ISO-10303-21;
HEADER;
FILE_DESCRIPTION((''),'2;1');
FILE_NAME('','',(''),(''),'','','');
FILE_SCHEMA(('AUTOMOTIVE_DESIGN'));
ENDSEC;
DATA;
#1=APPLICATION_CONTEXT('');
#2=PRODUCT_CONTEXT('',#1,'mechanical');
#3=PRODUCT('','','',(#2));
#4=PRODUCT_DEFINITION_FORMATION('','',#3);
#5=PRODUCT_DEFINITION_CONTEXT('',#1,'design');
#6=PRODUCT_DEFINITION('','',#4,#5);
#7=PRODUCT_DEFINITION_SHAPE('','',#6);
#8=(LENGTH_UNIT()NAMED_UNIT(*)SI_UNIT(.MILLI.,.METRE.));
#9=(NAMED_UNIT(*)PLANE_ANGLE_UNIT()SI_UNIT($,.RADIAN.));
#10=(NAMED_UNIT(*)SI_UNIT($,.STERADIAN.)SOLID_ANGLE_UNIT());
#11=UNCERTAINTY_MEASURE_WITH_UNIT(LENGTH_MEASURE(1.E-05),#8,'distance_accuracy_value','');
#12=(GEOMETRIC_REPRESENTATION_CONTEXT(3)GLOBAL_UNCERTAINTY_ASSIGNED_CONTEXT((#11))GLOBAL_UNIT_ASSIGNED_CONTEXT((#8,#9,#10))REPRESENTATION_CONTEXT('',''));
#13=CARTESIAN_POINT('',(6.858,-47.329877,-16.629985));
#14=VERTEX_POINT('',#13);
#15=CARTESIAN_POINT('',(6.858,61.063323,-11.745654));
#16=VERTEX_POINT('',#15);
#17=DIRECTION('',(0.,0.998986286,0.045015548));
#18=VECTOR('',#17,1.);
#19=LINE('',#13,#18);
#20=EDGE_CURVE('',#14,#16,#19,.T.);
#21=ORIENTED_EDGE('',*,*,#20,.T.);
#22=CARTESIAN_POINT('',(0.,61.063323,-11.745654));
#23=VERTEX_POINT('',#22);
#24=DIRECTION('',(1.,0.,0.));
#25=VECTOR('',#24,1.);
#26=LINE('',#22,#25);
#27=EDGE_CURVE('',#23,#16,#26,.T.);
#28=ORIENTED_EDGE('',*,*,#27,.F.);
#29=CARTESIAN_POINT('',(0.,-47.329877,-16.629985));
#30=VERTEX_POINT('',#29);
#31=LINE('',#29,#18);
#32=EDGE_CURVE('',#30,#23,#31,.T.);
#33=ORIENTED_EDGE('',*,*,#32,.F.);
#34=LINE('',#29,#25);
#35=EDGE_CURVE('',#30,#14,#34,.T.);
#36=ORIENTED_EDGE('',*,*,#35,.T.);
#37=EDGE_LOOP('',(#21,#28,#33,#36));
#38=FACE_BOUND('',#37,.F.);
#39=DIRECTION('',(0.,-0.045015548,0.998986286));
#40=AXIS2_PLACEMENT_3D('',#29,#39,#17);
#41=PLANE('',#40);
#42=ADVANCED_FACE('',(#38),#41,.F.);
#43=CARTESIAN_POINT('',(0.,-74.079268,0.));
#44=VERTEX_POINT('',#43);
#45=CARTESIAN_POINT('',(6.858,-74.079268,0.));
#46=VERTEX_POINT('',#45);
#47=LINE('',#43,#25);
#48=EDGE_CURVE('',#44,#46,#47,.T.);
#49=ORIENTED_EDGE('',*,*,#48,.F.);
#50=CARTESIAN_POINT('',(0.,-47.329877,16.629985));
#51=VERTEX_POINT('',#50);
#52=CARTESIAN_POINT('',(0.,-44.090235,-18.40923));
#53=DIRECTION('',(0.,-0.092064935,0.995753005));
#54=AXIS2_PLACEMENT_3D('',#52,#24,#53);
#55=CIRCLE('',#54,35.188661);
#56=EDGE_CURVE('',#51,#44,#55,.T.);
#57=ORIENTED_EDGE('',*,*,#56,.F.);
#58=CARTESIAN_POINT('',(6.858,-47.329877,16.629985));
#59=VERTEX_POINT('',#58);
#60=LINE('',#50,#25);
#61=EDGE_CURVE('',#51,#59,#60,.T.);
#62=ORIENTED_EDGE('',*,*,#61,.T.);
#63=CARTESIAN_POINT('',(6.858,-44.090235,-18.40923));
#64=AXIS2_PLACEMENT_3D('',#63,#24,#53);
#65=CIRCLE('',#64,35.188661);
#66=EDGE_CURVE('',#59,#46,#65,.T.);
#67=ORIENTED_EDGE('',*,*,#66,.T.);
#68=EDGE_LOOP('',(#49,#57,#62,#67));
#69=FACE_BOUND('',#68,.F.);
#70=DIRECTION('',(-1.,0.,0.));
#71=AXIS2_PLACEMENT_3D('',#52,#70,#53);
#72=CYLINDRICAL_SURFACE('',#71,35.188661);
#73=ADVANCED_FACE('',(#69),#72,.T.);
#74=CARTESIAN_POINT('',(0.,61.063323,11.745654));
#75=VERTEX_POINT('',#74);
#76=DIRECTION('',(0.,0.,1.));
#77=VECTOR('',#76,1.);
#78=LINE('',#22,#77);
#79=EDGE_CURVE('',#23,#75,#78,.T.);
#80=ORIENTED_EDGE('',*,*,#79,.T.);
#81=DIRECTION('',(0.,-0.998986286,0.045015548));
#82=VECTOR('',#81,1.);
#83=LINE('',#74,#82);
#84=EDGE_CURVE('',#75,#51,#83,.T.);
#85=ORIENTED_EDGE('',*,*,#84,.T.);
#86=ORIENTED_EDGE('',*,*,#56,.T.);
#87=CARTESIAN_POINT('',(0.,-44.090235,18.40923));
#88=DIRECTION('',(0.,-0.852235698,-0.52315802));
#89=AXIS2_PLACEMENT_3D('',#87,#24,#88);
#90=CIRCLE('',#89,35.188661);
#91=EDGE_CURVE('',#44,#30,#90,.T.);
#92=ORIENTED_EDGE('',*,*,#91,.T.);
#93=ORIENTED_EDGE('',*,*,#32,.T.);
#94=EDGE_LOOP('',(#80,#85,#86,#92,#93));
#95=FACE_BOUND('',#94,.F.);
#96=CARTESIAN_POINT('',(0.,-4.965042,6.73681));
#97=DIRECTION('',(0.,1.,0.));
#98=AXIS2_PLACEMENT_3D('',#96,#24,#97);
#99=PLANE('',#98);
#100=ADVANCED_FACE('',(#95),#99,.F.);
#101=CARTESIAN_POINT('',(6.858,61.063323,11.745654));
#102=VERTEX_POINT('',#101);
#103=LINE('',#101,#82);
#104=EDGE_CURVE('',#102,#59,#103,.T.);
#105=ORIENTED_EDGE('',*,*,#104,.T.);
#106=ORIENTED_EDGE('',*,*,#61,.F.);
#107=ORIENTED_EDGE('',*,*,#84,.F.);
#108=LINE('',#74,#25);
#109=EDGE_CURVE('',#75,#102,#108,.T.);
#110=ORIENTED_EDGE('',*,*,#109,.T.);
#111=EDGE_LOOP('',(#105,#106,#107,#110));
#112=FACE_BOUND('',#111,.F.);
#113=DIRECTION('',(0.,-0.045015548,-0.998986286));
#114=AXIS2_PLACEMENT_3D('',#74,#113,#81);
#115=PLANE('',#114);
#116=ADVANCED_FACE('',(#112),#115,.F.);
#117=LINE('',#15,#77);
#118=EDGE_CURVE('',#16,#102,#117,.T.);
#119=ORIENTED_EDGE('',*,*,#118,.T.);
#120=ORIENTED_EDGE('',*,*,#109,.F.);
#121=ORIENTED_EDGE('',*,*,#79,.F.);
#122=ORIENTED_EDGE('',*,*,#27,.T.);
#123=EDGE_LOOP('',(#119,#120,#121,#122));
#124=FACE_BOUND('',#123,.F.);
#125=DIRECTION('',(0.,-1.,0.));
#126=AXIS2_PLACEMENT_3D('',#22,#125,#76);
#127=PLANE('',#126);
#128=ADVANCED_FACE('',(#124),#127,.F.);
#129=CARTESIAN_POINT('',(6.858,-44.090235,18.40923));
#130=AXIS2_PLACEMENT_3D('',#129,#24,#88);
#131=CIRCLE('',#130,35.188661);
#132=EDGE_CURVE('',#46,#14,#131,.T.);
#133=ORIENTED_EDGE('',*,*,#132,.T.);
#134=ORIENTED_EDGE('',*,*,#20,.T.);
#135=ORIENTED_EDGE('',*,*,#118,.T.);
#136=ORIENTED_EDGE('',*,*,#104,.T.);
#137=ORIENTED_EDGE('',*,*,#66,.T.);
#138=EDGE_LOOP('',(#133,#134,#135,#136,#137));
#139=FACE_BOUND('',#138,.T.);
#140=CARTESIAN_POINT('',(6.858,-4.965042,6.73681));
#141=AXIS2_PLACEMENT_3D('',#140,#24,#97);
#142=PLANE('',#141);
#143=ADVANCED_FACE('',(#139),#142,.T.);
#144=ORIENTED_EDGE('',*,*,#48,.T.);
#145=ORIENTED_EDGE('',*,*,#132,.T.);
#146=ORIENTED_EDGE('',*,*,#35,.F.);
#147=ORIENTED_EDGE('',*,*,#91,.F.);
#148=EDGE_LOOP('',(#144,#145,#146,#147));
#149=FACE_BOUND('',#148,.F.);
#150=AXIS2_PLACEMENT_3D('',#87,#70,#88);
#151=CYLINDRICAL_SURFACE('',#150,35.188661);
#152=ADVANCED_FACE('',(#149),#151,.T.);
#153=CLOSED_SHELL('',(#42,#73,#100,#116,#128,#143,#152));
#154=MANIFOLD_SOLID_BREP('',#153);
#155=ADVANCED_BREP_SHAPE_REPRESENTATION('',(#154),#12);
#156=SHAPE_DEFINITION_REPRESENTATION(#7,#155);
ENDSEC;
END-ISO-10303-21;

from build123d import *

# Parameters (mm, degrees)
F1_DEPTH = 6.858


# Not quite as in the source:
# - the program builds the solid bodies; features that only make, move or delete a surface that nothing else refers to are left out


with BuildPart() as f1:
    # F0 (on Right) → F1 (new body)
    with BuildSketch(Plane.YZ):
        with BuildLine():
            Line((61.0633231699, 11.7456540465), (-47.3298765719, 16.6299846023))
            ThreePointArc((-47.3298765719, 16.6299846023), (-62.6691287871, 11.4749888817), (-74.0792676806, 0))
            Line((-74.0792676806, 0), (61.0633231699, 0))
            Line((61.0633231699, 0), (61.0633231699, 11.7456540465))
        make_face()
        with BuildLine():
            Line((61.0633231699, 0), (-74.0792676806, 0))
            ThreePointArc((-74.0792676806, 0), (-62.6691287871, -11.4749888817), (-47.3298765719, -16.6299846023))
            Line((-47.3298765719, -16.6299846023), (61.0633231699, -11.7456540465))
            Line((61.0633231699, -11.7456540465), (61.0633231699, 0))
        make_face()
    extrude(amount=F1_DEPTH)


solid = f1.part
